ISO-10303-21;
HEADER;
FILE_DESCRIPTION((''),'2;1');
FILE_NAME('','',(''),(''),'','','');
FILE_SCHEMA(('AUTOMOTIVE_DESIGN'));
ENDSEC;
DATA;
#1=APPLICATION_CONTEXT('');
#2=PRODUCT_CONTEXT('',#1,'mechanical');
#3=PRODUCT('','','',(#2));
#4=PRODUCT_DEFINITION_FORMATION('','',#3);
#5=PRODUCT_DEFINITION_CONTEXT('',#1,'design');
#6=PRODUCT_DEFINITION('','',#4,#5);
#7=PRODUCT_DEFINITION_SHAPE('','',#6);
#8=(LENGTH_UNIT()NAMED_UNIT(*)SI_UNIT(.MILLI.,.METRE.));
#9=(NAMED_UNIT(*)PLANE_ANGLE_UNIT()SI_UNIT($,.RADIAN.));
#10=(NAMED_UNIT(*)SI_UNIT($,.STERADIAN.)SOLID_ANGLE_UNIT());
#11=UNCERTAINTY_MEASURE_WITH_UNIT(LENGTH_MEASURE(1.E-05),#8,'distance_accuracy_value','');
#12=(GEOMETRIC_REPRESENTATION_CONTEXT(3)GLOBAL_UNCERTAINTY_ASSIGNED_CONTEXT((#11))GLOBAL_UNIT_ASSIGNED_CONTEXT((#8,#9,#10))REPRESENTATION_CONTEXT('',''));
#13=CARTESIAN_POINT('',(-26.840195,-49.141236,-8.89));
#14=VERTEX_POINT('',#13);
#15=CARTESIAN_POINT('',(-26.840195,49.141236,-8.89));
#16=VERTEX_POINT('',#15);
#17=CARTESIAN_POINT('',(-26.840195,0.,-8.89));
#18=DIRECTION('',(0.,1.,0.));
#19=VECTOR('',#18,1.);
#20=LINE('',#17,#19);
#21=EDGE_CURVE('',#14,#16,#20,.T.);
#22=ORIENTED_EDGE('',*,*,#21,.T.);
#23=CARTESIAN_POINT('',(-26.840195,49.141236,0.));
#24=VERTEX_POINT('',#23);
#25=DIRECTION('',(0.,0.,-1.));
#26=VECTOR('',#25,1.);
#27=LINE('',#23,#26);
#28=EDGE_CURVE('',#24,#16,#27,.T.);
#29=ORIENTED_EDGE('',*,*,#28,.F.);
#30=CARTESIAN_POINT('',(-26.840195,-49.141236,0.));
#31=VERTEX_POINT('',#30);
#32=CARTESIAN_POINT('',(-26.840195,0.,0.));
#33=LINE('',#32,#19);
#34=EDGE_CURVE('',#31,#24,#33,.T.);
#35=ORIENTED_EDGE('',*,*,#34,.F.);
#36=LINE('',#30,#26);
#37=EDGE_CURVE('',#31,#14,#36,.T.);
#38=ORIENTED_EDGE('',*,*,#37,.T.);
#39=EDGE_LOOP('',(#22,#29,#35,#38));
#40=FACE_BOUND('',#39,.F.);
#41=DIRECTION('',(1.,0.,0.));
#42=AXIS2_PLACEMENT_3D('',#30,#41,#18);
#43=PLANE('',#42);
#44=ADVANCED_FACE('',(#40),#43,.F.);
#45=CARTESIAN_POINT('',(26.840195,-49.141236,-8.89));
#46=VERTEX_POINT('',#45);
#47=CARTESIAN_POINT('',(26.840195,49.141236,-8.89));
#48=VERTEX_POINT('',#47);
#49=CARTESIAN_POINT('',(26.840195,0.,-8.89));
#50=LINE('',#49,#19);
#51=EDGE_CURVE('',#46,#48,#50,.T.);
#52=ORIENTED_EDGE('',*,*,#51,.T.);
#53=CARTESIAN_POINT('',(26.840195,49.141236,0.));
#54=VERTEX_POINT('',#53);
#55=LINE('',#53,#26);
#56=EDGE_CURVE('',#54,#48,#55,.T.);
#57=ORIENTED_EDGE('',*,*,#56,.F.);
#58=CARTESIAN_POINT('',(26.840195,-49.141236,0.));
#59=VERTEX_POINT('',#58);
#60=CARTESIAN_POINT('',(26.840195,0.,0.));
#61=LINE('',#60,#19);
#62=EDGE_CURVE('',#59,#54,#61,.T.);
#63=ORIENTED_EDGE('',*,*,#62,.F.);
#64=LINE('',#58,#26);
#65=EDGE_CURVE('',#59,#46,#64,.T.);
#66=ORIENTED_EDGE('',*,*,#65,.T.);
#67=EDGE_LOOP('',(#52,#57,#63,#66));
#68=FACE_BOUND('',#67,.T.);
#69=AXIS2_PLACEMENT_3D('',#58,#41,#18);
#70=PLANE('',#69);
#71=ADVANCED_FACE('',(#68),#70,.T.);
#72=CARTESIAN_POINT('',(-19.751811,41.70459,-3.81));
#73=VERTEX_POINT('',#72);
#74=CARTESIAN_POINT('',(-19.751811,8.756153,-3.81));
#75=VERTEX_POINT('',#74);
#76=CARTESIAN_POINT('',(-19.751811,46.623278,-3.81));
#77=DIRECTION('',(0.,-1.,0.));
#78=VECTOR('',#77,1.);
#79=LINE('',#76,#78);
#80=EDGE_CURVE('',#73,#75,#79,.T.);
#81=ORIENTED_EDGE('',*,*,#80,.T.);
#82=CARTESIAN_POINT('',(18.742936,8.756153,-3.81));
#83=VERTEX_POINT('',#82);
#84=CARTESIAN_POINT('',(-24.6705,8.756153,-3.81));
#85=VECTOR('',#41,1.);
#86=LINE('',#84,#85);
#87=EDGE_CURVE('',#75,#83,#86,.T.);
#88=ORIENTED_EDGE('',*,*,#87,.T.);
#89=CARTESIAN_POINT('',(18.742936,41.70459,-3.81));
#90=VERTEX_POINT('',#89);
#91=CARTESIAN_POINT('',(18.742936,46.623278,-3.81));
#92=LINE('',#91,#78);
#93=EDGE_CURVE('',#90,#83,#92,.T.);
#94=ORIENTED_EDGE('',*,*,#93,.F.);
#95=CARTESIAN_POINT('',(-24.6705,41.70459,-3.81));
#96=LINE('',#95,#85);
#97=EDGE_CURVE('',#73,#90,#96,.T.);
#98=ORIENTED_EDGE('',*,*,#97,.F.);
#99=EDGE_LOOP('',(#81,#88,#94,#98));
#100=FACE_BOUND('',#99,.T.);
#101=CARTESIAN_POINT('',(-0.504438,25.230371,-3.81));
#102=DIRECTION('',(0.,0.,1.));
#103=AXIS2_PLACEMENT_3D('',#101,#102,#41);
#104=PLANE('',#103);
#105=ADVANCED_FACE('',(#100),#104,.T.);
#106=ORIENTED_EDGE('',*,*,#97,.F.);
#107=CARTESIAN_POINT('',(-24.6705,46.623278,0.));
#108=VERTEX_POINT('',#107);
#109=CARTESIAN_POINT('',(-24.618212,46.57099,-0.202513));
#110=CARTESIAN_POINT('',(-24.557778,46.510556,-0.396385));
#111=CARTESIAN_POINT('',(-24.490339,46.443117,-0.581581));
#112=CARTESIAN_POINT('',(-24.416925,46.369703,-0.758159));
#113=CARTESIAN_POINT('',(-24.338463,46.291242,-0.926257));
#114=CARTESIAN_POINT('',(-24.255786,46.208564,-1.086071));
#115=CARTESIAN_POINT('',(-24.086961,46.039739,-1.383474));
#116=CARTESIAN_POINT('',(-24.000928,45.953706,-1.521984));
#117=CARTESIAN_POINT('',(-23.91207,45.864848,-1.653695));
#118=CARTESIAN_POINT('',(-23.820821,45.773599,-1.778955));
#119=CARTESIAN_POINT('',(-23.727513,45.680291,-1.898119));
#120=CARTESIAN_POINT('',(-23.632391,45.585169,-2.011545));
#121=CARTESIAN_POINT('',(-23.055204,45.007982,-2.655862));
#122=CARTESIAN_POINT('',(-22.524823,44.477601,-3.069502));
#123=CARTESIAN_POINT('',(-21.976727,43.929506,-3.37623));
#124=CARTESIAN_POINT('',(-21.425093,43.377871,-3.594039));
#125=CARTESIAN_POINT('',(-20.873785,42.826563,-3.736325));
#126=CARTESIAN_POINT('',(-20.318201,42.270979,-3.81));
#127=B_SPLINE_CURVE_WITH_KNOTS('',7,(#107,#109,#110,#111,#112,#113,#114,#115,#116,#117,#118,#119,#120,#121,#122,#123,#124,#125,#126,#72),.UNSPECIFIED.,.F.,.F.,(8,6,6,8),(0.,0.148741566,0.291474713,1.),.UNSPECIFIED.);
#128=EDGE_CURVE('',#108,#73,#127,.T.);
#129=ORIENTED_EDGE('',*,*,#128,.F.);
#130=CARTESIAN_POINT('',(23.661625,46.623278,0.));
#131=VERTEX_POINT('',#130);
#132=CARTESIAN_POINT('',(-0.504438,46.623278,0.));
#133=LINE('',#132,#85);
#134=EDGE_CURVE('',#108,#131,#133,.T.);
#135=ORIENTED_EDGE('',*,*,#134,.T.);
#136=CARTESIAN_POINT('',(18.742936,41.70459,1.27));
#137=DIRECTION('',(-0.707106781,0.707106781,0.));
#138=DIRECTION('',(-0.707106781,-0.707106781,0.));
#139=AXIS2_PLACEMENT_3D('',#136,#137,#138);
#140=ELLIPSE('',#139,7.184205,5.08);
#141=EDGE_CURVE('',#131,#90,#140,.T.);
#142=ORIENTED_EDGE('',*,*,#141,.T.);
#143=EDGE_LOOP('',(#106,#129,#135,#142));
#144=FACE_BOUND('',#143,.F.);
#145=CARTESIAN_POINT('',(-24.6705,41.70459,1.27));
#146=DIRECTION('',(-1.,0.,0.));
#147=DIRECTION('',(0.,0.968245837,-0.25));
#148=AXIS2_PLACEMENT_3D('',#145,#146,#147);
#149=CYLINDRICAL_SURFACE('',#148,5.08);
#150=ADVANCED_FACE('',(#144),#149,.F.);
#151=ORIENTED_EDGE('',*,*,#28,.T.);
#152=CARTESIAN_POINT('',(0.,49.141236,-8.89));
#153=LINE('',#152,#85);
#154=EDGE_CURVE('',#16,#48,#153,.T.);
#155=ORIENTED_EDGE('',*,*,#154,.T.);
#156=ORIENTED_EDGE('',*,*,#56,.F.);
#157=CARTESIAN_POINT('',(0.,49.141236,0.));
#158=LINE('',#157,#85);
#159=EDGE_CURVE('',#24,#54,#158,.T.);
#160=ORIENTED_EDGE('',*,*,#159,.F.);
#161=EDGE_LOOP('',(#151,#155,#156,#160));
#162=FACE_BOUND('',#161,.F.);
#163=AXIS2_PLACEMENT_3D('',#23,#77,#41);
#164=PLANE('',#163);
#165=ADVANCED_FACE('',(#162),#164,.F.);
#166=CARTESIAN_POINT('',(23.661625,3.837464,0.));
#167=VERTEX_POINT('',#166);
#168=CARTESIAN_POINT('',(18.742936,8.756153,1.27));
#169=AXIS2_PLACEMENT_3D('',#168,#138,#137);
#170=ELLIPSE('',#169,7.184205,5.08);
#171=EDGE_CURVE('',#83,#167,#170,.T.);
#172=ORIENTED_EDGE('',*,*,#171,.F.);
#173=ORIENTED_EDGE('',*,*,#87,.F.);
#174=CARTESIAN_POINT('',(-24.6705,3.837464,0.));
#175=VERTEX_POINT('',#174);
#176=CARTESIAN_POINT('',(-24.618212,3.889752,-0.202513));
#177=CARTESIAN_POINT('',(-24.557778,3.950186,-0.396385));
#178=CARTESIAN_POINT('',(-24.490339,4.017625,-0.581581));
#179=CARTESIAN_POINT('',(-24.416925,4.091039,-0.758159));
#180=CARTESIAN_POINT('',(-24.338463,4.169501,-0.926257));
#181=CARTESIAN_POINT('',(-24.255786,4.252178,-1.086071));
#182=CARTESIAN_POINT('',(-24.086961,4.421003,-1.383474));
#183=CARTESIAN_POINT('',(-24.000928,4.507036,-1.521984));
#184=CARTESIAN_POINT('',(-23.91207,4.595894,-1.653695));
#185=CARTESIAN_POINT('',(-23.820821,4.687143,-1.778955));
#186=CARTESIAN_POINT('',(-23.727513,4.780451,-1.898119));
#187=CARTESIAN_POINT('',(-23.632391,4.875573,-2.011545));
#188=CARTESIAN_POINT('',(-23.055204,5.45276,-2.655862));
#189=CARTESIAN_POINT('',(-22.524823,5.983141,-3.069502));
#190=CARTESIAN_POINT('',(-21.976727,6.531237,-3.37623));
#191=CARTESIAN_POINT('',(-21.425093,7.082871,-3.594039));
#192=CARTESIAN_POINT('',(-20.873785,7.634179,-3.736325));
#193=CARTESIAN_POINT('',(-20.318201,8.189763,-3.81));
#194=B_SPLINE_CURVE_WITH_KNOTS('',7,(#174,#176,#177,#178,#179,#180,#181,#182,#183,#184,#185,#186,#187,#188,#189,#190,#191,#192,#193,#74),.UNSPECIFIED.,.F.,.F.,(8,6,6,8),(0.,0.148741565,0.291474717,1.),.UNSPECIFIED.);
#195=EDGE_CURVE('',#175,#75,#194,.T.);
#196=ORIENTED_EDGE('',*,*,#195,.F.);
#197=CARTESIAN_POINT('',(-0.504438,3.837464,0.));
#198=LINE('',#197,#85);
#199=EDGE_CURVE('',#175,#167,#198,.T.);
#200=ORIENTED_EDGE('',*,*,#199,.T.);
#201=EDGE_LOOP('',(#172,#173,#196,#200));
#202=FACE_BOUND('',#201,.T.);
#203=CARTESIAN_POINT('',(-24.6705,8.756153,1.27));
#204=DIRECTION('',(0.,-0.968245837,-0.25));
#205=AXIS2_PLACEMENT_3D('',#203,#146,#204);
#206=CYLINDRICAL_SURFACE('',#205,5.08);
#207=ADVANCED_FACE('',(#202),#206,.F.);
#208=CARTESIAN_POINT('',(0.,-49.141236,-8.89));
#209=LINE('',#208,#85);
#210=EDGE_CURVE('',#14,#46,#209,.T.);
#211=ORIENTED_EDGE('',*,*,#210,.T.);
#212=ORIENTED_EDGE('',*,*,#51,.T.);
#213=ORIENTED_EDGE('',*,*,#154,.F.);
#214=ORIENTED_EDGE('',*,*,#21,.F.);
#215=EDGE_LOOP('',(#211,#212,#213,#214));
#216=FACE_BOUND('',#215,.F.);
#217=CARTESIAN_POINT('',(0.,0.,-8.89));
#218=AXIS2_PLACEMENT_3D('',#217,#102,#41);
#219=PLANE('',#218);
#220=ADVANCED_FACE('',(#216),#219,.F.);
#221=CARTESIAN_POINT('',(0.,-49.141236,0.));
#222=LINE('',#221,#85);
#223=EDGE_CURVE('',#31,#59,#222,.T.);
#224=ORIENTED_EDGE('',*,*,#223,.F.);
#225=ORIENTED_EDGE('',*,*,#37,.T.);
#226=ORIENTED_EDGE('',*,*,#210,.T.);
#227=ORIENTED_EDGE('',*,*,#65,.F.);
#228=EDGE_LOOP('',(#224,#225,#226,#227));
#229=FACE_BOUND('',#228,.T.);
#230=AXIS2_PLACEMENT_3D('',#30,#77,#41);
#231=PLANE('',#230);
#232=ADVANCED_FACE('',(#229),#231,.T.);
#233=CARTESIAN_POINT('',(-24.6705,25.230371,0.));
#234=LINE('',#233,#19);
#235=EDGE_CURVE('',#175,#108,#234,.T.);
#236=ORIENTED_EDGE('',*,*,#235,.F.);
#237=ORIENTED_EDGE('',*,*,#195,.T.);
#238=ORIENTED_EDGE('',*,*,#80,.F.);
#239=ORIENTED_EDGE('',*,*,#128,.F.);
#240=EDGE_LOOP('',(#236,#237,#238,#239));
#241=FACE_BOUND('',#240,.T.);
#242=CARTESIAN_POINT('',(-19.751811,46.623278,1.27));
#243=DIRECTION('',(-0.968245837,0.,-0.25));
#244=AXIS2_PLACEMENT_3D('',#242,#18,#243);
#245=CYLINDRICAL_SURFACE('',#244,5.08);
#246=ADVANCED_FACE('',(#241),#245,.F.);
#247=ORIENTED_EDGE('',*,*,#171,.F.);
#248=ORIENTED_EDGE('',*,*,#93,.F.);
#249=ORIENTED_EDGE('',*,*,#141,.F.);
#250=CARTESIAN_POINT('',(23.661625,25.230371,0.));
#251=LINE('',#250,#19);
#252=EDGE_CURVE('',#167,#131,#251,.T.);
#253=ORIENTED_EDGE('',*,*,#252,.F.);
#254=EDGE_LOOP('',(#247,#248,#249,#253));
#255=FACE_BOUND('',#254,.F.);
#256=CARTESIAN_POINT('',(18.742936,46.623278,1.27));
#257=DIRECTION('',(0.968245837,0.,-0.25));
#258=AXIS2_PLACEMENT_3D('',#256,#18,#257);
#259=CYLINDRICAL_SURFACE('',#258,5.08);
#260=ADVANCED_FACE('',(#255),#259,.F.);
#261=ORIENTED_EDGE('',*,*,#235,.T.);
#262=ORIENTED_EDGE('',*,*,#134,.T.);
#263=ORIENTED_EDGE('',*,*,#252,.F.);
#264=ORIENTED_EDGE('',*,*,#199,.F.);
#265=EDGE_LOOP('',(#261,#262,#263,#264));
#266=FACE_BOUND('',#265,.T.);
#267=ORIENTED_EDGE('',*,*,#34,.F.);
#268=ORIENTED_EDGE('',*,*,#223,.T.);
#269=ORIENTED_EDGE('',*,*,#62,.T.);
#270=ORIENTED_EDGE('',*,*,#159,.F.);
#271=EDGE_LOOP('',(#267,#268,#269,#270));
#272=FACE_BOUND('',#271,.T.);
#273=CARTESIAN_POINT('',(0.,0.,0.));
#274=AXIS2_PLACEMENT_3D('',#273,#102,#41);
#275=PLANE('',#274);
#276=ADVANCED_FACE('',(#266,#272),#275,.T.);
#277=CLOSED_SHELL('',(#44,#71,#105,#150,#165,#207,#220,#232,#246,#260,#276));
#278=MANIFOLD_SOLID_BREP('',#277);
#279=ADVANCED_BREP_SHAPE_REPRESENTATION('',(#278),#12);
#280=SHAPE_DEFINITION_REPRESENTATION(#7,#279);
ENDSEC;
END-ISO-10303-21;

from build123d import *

# Parameters (mm, degrees)
F0_W        = 53.6803901196
F0_H        = 98.2824712992
F1_DEPTH    = 8.89
F2_W        = 48.3321249485
F2_H        = 42.7858147305
F3_DEPTH    = 3.81
F4_T1_DEPTH = 48.3321249485
F4_T3_DEPTH = 55.0825368547


# Not quite as in the source:
# - a fillet or chamfer that OpenCascade refuses, or shapes differently, is made with other operations: its cross-section is extruded or revolved along the edge and cut away or added


with BuildPart() as f1:
    # F0 (on Top) → F1 (new body)
    with BuildSketch(Plane.XY):
        Rectangle(F0_W, F0_H)
    extrude(amount=-F1_DEPTH)

    # F2 (on Top) → F3 (cut)
    with BuildSketch(Plane.XY):
        with Locations((-0.504437834, 25.230371044)):
            Rectangle(F2_W, F2_H)
    extrude(amount=-F3_DEPTH, mode=Mode.SUBTRACT)

    # F4: fillet of radius 5.08 on 4 edges, made by hand

    # F4_s2 → F4_t1 (join)
    with BuildSketch(Plane.YZ.offset(-24.6705003083)):
        with BuildLine():
            ThreePointArc((46.6232784092, 0), (44.8154415329, -2.7460926284), (41.7045895596, -3.81))
            Line((41.7045895596, -3.81), (46.6232784092, -3.81))
            Line((46.6232784092, -3.81), (46.6232784092, 0))
        make_face()
        with BuildLine():
            ThreePointArc((3.8374636788, 0), (5.6453005551, -2.7460926284), (8.7561525285, -3.81))
            Line((8.7561525285, -3.81), (3.8374636788, -3.81))
            Line((3.8374636788, -3.81), (3.8374636788, 0))
        make_face()
    extrude(amount=F4_T1_DEPTH)

    # F4_s4 → F4_t3 (join)
    with BuildSketch(Plane.XZ.offset(-46.6232784092)):
        with BuildLine():
            ThreePointArc((-24.6705003083, 0), (-22.8626634319, -2.7460926284), (-19.7518114586, -3.81))
            Line((-19.7518114586, -3.81), (-24.6705003083, -3.81))
            Line((-24.6705003083, -3.81), (-24.6705003083, 0))
        make_face()
        with BuildLine():
            ThreePointArc((23.6616246402, 0), (21.8537877639, -2.7460926284), (18.7429357905, -3.81))
            Line((18.7429357905, -3.81), (23.6616246402, -3.81))
            Line((23.6616246402, -3.81), (23.6616246402, 0))
        make_face()
    extrude(amount=F4_T3_DEPTH)


solid = f1.part
